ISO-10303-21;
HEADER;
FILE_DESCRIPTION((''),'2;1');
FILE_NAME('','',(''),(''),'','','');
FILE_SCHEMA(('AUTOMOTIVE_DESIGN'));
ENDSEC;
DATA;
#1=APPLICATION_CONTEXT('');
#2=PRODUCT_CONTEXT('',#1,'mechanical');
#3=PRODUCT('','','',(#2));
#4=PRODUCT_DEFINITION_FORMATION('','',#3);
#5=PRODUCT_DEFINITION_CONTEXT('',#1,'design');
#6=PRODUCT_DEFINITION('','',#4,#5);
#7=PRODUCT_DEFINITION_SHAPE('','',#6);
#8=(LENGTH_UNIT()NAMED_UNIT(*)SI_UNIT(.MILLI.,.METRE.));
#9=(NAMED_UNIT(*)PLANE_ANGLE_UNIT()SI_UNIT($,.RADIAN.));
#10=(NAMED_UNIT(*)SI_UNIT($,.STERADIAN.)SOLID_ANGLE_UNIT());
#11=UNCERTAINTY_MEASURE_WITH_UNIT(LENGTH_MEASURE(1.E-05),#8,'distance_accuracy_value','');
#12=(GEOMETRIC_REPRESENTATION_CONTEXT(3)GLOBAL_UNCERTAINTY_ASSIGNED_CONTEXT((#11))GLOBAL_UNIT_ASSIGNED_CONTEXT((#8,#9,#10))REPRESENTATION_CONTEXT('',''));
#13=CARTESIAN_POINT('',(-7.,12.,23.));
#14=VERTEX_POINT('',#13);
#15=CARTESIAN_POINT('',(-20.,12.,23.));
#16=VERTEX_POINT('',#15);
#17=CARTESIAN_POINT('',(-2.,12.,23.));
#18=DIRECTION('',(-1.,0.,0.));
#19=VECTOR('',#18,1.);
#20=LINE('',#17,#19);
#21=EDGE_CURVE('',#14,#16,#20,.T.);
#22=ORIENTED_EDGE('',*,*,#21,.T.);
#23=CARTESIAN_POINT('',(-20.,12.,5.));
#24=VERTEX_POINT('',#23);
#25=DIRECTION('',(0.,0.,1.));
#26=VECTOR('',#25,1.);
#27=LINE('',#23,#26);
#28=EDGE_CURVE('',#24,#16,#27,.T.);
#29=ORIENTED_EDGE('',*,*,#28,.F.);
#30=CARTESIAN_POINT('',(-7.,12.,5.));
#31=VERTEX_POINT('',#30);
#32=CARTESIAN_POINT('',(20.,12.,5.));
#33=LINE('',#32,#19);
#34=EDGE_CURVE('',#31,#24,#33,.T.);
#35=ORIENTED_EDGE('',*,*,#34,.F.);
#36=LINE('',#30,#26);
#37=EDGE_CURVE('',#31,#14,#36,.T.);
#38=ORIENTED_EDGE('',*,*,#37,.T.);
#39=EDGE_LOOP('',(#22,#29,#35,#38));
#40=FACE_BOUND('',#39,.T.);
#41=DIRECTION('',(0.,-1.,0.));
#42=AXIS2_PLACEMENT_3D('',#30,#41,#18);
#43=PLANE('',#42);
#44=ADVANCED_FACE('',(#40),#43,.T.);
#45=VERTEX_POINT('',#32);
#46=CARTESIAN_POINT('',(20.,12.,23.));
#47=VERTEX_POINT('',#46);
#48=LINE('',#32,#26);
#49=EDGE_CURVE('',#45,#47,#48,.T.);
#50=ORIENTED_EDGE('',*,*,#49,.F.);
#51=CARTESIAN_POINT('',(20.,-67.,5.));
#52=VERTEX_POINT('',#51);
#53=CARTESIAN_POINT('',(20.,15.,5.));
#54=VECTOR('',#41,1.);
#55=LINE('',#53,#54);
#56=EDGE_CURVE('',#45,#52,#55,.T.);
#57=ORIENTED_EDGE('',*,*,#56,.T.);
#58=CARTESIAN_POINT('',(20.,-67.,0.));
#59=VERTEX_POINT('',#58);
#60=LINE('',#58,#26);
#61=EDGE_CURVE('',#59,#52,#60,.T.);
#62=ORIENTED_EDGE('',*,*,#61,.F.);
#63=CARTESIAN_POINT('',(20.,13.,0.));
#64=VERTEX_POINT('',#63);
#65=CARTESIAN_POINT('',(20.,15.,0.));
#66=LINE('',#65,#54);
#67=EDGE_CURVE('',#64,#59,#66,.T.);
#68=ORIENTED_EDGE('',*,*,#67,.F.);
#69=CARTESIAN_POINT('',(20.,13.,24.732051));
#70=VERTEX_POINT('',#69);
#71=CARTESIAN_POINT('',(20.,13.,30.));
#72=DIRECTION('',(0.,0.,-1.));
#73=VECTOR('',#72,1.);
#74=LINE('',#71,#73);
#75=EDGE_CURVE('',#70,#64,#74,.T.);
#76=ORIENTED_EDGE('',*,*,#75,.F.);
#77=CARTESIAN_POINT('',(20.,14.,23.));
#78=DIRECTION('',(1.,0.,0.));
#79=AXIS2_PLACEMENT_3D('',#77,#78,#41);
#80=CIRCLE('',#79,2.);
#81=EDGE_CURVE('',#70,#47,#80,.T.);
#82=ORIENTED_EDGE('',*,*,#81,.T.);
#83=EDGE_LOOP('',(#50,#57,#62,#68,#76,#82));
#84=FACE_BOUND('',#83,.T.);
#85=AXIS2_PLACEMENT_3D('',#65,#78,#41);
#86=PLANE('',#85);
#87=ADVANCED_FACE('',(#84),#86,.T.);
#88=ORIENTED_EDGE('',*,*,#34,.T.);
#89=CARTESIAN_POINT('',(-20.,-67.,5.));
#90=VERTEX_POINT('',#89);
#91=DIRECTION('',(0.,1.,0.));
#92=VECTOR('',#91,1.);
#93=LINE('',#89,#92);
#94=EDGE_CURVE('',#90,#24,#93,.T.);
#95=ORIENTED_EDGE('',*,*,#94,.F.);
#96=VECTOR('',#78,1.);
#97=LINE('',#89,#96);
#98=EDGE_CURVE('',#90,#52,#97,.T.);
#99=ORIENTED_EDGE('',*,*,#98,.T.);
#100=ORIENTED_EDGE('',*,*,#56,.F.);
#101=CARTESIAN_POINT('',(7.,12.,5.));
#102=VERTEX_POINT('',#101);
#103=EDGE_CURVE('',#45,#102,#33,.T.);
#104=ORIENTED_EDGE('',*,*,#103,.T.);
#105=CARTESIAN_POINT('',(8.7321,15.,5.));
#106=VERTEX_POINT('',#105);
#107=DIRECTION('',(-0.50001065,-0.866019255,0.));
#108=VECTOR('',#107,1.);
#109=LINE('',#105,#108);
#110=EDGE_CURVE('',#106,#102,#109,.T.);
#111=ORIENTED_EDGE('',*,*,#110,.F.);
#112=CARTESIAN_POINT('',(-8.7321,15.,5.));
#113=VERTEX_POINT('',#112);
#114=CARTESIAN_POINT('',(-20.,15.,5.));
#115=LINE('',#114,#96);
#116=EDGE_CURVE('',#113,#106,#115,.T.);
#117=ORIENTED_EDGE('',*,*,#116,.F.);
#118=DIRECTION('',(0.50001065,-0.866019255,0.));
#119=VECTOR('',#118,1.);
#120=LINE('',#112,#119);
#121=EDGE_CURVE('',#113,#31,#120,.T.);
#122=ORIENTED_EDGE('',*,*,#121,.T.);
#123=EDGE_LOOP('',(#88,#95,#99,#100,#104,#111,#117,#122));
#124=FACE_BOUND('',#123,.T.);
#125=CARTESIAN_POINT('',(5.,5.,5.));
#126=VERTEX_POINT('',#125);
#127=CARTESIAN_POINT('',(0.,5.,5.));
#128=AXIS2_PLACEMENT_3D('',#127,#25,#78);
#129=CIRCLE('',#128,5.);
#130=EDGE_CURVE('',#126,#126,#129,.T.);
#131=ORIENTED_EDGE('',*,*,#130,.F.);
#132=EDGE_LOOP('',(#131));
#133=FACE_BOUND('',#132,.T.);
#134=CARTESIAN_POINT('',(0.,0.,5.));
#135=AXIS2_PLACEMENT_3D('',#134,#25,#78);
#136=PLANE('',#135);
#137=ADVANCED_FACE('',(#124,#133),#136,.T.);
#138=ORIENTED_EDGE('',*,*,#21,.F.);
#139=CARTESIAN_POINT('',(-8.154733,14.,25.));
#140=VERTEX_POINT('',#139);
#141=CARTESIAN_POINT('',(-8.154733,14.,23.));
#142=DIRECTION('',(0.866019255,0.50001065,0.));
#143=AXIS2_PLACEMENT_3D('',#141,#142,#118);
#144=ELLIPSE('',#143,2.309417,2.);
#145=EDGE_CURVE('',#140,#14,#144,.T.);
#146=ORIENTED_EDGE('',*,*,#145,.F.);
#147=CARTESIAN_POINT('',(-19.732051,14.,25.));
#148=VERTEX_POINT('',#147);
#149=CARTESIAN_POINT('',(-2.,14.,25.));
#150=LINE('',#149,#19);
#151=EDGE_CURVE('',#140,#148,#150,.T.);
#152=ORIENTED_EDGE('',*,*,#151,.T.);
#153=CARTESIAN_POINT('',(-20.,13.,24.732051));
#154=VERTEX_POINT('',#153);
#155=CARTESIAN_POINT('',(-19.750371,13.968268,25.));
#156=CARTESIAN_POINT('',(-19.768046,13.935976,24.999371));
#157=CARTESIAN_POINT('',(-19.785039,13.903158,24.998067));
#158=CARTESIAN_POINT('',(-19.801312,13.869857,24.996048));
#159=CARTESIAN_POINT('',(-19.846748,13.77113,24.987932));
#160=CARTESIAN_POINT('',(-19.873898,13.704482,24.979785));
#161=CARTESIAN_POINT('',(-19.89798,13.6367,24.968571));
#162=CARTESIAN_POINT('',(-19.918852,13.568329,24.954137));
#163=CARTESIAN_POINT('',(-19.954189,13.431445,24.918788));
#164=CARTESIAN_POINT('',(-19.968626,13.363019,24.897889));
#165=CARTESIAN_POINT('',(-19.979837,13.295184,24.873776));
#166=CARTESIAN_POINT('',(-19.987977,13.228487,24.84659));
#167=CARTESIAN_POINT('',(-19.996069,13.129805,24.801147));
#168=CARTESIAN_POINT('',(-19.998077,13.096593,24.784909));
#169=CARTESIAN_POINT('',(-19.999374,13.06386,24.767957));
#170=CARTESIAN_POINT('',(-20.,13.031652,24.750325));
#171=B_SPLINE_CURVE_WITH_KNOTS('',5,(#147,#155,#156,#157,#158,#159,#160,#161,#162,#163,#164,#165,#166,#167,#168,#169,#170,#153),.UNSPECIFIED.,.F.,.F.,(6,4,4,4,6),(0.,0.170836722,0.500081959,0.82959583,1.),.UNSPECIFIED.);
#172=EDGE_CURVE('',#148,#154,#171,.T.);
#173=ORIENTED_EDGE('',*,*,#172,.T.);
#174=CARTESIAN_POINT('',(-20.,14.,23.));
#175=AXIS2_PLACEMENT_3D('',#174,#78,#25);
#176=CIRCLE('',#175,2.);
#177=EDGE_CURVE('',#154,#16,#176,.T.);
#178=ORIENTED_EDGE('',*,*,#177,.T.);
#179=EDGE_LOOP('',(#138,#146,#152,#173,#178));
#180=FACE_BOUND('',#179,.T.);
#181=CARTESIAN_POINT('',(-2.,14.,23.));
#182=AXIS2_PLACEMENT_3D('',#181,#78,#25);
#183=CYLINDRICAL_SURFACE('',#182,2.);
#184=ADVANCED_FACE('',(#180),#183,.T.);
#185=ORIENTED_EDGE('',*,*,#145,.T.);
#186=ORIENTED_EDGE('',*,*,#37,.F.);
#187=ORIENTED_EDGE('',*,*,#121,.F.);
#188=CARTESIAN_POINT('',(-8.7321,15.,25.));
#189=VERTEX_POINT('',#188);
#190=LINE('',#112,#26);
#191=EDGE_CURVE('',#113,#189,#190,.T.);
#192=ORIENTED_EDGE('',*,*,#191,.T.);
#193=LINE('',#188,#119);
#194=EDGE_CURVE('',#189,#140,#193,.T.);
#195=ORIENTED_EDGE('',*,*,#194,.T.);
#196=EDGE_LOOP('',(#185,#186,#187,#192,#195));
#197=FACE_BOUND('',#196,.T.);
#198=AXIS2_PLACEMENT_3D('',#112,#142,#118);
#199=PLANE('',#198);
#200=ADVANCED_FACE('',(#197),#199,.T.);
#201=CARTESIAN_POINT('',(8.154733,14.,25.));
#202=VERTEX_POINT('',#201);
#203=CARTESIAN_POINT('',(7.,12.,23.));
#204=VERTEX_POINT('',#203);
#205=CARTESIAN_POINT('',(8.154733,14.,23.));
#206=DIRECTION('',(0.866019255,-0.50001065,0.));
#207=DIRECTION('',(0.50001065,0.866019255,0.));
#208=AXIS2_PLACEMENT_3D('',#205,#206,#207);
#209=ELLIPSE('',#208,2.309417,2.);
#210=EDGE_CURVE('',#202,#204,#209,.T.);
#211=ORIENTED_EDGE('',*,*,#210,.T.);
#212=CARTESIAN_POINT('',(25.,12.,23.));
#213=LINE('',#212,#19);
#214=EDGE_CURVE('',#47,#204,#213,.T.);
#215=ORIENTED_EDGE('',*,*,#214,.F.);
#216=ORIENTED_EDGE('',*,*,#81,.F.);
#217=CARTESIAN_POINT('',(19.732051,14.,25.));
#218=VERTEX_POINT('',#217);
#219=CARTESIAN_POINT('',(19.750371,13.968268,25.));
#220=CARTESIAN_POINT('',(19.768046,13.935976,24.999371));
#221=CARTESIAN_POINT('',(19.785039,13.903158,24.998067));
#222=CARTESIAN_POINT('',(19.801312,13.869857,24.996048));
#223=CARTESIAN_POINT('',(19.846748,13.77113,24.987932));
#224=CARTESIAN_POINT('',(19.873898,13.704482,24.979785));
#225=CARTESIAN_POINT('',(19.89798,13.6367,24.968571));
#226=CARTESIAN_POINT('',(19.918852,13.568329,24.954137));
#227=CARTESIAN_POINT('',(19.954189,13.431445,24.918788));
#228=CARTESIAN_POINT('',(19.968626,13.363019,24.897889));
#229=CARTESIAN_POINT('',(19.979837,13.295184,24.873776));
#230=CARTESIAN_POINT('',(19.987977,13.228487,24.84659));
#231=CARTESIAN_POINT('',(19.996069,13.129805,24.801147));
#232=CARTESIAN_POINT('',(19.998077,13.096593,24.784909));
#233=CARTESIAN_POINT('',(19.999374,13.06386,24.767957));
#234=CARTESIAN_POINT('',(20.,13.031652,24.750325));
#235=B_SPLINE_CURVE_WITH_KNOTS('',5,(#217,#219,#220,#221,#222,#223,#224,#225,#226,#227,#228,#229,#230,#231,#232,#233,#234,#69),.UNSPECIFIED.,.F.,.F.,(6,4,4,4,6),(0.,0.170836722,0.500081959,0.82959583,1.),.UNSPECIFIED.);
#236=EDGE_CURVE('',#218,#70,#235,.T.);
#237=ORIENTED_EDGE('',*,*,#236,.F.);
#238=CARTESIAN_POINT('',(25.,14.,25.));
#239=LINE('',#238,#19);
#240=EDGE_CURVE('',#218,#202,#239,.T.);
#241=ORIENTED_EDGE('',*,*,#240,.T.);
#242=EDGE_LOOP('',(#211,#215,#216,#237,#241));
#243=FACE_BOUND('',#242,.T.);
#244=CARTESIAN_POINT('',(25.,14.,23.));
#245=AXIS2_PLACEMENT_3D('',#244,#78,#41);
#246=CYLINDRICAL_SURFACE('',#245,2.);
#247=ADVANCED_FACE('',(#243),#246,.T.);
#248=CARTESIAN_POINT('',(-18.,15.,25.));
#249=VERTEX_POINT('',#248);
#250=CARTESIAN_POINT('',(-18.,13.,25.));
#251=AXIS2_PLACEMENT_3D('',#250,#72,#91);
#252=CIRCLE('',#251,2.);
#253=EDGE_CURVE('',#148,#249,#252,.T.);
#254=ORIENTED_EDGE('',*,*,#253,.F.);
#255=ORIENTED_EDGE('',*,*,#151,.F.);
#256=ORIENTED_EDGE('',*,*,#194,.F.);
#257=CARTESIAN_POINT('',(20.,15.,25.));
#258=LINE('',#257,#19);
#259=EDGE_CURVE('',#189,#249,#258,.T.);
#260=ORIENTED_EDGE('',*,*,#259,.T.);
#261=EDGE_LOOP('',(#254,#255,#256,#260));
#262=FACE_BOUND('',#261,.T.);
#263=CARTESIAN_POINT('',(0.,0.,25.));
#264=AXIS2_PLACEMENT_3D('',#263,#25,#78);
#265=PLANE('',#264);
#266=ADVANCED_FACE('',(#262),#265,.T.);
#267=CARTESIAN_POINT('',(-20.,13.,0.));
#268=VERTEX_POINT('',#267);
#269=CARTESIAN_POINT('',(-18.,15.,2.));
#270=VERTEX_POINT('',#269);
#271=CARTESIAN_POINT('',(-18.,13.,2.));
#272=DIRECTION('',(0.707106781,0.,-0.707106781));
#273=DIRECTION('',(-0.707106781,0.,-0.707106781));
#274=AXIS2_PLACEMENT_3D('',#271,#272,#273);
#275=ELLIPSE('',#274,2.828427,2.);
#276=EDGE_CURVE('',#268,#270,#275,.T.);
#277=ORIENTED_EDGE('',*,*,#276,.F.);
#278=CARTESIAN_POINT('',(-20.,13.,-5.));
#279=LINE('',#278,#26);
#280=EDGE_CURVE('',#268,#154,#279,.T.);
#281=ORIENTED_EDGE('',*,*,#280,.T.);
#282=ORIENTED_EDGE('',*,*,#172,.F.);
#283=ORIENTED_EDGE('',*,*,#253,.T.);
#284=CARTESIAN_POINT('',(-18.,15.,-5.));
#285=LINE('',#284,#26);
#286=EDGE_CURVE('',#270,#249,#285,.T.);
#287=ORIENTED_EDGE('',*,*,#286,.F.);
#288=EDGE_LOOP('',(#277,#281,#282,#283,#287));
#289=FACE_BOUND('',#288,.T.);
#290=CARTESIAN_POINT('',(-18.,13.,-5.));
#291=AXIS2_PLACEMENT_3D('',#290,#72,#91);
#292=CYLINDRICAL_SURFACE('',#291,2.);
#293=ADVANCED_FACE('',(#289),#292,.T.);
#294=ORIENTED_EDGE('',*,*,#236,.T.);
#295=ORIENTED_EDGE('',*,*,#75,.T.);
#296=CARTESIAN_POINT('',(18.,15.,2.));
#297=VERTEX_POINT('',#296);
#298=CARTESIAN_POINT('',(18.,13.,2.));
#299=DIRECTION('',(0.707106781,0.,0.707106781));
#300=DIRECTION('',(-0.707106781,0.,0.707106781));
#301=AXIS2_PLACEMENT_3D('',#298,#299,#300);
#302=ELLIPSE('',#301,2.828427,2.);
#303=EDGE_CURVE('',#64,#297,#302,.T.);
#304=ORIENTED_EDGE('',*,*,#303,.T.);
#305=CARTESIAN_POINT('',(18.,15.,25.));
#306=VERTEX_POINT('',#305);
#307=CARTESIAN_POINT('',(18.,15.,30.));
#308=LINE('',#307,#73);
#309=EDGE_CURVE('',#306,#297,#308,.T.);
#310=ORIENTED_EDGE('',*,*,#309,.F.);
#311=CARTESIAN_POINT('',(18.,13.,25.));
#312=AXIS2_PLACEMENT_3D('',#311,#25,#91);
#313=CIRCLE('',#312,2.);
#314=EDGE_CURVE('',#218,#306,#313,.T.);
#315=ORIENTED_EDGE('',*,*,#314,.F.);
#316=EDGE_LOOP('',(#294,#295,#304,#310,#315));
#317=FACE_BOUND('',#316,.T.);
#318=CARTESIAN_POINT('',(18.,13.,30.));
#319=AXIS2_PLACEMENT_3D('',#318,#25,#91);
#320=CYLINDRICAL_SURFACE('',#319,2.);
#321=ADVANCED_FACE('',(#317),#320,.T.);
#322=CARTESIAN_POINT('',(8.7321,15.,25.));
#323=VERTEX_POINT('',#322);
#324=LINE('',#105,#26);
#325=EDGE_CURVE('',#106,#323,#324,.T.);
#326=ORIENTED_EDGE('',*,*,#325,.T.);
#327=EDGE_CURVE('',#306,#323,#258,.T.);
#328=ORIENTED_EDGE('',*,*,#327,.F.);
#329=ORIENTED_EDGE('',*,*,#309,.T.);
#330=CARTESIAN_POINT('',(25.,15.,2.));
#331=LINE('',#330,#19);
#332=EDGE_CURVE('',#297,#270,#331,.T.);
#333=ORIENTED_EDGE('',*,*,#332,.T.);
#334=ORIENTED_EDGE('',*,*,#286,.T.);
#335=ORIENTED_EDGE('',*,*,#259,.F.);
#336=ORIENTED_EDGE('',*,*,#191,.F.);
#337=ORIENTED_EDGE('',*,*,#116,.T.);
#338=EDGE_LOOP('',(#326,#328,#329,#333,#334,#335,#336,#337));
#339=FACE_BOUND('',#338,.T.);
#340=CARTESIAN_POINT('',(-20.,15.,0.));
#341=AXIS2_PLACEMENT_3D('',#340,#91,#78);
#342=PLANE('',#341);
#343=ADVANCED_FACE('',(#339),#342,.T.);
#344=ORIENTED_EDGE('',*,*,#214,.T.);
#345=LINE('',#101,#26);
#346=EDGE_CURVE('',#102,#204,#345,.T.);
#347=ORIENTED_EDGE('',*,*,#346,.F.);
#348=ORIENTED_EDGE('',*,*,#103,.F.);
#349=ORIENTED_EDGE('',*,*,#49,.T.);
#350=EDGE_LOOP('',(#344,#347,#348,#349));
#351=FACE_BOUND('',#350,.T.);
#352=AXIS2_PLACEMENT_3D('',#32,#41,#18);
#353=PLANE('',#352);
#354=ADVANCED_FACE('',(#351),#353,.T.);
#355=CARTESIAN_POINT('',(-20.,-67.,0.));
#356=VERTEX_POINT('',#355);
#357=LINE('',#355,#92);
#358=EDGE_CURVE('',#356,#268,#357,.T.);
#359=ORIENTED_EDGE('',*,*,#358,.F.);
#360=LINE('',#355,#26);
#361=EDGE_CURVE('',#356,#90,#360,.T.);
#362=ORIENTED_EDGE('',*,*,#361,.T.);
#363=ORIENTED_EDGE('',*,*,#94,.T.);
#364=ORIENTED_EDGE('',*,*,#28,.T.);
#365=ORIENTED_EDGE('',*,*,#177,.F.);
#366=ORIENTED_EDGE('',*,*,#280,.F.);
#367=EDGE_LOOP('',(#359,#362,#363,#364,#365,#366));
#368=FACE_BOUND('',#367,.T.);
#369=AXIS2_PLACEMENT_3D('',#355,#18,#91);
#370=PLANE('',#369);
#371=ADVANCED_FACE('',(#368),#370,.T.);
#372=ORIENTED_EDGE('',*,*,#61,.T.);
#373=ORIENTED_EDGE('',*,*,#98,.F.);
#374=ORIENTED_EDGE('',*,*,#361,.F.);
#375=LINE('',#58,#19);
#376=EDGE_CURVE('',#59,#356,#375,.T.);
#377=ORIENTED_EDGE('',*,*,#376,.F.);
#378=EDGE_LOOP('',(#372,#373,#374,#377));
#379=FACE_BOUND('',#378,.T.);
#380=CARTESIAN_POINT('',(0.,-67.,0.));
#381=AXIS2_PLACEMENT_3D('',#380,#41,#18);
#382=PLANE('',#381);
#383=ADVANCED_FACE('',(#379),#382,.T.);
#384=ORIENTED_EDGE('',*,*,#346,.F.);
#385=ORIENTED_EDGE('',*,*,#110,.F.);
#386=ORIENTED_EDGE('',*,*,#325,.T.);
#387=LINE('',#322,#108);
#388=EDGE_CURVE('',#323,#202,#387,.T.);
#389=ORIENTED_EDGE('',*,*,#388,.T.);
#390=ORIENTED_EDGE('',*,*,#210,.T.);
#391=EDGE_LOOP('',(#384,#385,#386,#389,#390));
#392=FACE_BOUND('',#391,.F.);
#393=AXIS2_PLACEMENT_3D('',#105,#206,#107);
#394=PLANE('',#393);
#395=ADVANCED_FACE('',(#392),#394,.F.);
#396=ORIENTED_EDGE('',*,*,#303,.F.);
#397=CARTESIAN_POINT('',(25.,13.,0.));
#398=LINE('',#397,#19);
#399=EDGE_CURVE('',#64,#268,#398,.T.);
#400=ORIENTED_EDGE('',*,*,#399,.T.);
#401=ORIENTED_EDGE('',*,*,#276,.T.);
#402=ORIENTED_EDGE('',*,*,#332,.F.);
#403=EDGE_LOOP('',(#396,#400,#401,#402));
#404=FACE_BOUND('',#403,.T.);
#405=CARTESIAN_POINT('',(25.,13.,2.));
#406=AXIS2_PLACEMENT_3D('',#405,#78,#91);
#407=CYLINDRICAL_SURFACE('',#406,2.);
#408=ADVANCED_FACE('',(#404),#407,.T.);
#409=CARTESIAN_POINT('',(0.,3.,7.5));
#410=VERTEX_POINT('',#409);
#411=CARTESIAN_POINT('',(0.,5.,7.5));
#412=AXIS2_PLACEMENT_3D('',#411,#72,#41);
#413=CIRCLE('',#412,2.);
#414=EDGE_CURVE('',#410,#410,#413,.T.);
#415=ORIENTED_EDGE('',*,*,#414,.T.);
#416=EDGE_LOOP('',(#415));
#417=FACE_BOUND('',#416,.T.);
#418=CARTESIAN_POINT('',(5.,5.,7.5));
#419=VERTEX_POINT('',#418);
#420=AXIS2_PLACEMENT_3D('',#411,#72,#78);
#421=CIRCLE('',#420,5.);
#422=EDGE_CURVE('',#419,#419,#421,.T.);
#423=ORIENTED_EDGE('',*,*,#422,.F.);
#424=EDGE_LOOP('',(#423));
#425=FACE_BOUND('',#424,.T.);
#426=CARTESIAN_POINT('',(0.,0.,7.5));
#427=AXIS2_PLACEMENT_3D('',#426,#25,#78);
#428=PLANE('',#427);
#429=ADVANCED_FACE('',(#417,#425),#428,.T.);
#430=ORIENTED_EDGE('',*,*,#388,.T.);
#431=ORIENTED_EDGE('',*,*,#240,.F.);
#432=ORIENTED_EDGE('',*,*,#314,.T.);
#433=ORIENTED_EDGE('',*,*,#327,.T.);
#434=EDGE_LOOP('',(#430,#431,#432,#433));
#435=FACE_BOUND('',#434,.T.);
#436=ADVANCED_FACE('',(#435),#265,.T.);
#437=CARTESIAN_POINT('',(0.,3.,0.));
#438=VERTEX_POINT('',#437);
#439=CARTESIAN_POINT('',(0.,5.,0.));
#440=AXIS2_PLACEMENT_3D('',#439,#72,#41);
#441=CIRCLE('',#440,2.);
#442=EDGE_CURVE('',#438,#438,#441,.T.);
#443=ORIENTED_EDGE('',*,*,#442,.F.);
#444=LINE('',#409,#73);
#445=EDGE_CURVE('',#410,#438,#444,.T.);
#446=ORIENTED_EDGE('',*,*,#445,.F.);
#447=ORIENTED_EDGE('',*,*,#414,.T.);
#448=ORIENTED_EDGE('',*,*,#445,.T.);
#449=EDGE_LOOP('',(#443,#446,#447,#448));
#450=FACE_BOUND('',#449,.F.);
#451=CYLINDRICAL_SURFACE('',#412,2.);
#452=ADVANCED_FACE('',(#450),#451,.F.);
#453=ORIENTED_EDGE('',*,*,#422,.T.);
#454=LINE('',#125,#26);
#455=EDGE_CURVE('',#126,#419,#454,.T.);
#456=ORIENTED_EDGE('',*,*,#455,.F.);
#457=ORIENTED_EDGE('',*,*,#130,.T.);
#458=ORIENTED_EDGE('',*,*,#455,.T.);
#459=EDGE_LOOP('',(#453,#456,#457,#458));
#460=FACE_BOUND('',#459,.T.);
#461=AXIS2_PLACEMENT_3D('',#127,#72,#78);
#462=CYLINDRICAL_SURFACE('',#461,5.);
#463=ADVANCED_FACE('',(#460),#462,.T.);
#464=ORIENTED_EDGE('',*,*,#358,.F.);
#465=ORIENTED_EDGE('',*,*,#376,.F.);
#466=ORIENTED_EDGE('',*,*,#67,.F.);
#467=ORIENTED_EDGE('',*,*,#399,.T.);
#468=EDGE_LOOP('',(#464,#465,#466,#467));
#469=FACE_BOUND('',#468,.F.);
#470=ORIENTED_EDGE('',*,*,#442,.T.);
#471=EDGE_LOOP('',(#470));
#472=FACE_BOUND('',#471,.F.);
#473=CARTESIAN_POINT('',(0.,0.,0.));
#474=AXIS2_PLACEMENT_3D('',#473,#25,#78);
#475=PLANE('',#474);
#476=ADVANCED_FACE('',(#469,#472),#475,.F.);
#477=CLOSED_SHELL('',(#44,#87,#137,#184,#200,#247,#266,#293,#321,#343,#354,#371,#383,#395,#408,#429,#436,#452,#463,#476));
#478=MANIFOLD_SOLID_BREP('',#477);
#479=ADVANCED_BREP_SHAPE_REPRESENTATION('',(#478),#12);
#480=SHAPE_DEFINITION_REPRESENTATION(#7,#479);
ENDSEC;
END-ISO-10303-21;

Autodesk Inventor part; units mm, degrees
ref_plane "YZ Plane" through (0, 0, 0) normal (1, 0, 0) x (0, 1, 0)
ref_plane "XZ Plane" through (0, 0, 0) normal (0, 1, 0) x (-1, 0, 0)
ref_plane "XY Plane" through (0, 0, 0) normal (0, 0, 1) x (1, 0, 0)
sketch "Skizze1" plane through (0, 0, 0) normal (0, 0, 1) x (1, 0, 0)
  line L0 (-20, 15) -> (20, 15)
  line L1 (20, 15) -> (20, -67)
  line L2 (20, -67) -> (-20, -67)
  line L3 (-20, -67) -> (-20, 15)
  line L4 (0, -83.4) -> (0, 31.4) projected
  point P0 (0, 0)
  point P1 (0, 15)
  dimension "d2" = 82
  dimension "d4" = 15
  dimension "d42" = 40
extrude "Extrusion1" add sketch "Skizze1" along normal blind 5
sketch "Skizze2" plane through (0, 0, 5) normal (0, 0, 1) x (1, 0, 0)
  line L0 (20, 15) -> (-20, 15) projected
  circle A0 centre (0, 5) radius 5
  line L1 (0, -83.4) -> (0, 31.4) projected
  point P0 (0, 0)
  dimension "d10" = 10
  dimension "d11" = 10
extrude "Extrusion2" add sketch "Skizze2" along normal blind 2.5
sketch "Skizze3" plane through (0, 5, 7.5) normal (0, 0, 1) x (1, 0, 0)
  circle A0 centre (0, 0) radius 5 projected
  circle A1 centre (0, 0) radius 1
  point P0 (0, -5)
  dimension "d15" = 2
hole "Bohrung1" at (0, 5, 7.5) direction (0, 0, -1) diameter 4 end through all
sketch "Skizze6" plane through (0, 0, 5) normal (0, 0, 1) x (1, 0, 0)
  line L0 (20, -67) -> (20, 15) projected
  line L1 (20, 15) -> (-20, 15) projected
  circle A0 centre (0, 5) radius 5 projected
  line L2 (-20, -67) -> (20, -67) projected
  line L3 (-20, 15) -> (-20, -67) projected
sketch "Skizze7" plane through (0, 0, 5) normal (0, 0, 1) x (1, 0, 0)
  circle A0 centre (0, 5) radius 5 projected
  line L0 (-20, -67) -> (20, -67) projected
  line L1 (20, -67) -> (20, 15) projected
  line L2 (20, 15) -> (-20, 15) projected
  line L3 (-20, 15) -> (-20, -67) projected
  point P0 (0, 0)
sketch "Skizze9" plane through (0, 0, 5) normal (0, 0, 1) x (1, 0, 0)
  line L0 (20, -67) -> (20, 15) projected
  line L1 (20, 15) -> (-20, 15) projected
  line L2 (-20, 15) -> (-20, -67) projected
  line L3 (20, 15) -> (20, 12)
  line L4 (20, 12) -> (-20, 12)
  line L5 (-20, 12) -> (-20, 15)
  line L6 (-8.7321, 15) -> (-7, 12)
  line L7 (8.7321, 15) -> (7, 12)
  line L8 (8.7321, 15) -> (12.1962, 15) construction
  line L9 (-20, 15) -> (-8.7321, 15)
  line L10 (8.7321, 15) -> (20, 15)
  point P0 (0, 0)
  point P1 (-8.7321, 15)
  dimension "d52" = 3
  dimension "d54" = 120
  dimension "d56" = 13
  dimension "d57" = 13
  dimension "d60" = 120
extrude "Extrusion6" add sketch "Skizze9" along normal blind 20 contours L4 L7 L1 L0 | L4 L2 L1 L6
fillet "Rundung1" radius 2 5 edges at (20, 15, 12.5) (-20, 15, 12.5) (0, 15, 0) (13.5, 12, 25) (-13.5, 12, 25)
properties part number "Gehäuse" material "1.2067 100 Cr 6 (WS)"
